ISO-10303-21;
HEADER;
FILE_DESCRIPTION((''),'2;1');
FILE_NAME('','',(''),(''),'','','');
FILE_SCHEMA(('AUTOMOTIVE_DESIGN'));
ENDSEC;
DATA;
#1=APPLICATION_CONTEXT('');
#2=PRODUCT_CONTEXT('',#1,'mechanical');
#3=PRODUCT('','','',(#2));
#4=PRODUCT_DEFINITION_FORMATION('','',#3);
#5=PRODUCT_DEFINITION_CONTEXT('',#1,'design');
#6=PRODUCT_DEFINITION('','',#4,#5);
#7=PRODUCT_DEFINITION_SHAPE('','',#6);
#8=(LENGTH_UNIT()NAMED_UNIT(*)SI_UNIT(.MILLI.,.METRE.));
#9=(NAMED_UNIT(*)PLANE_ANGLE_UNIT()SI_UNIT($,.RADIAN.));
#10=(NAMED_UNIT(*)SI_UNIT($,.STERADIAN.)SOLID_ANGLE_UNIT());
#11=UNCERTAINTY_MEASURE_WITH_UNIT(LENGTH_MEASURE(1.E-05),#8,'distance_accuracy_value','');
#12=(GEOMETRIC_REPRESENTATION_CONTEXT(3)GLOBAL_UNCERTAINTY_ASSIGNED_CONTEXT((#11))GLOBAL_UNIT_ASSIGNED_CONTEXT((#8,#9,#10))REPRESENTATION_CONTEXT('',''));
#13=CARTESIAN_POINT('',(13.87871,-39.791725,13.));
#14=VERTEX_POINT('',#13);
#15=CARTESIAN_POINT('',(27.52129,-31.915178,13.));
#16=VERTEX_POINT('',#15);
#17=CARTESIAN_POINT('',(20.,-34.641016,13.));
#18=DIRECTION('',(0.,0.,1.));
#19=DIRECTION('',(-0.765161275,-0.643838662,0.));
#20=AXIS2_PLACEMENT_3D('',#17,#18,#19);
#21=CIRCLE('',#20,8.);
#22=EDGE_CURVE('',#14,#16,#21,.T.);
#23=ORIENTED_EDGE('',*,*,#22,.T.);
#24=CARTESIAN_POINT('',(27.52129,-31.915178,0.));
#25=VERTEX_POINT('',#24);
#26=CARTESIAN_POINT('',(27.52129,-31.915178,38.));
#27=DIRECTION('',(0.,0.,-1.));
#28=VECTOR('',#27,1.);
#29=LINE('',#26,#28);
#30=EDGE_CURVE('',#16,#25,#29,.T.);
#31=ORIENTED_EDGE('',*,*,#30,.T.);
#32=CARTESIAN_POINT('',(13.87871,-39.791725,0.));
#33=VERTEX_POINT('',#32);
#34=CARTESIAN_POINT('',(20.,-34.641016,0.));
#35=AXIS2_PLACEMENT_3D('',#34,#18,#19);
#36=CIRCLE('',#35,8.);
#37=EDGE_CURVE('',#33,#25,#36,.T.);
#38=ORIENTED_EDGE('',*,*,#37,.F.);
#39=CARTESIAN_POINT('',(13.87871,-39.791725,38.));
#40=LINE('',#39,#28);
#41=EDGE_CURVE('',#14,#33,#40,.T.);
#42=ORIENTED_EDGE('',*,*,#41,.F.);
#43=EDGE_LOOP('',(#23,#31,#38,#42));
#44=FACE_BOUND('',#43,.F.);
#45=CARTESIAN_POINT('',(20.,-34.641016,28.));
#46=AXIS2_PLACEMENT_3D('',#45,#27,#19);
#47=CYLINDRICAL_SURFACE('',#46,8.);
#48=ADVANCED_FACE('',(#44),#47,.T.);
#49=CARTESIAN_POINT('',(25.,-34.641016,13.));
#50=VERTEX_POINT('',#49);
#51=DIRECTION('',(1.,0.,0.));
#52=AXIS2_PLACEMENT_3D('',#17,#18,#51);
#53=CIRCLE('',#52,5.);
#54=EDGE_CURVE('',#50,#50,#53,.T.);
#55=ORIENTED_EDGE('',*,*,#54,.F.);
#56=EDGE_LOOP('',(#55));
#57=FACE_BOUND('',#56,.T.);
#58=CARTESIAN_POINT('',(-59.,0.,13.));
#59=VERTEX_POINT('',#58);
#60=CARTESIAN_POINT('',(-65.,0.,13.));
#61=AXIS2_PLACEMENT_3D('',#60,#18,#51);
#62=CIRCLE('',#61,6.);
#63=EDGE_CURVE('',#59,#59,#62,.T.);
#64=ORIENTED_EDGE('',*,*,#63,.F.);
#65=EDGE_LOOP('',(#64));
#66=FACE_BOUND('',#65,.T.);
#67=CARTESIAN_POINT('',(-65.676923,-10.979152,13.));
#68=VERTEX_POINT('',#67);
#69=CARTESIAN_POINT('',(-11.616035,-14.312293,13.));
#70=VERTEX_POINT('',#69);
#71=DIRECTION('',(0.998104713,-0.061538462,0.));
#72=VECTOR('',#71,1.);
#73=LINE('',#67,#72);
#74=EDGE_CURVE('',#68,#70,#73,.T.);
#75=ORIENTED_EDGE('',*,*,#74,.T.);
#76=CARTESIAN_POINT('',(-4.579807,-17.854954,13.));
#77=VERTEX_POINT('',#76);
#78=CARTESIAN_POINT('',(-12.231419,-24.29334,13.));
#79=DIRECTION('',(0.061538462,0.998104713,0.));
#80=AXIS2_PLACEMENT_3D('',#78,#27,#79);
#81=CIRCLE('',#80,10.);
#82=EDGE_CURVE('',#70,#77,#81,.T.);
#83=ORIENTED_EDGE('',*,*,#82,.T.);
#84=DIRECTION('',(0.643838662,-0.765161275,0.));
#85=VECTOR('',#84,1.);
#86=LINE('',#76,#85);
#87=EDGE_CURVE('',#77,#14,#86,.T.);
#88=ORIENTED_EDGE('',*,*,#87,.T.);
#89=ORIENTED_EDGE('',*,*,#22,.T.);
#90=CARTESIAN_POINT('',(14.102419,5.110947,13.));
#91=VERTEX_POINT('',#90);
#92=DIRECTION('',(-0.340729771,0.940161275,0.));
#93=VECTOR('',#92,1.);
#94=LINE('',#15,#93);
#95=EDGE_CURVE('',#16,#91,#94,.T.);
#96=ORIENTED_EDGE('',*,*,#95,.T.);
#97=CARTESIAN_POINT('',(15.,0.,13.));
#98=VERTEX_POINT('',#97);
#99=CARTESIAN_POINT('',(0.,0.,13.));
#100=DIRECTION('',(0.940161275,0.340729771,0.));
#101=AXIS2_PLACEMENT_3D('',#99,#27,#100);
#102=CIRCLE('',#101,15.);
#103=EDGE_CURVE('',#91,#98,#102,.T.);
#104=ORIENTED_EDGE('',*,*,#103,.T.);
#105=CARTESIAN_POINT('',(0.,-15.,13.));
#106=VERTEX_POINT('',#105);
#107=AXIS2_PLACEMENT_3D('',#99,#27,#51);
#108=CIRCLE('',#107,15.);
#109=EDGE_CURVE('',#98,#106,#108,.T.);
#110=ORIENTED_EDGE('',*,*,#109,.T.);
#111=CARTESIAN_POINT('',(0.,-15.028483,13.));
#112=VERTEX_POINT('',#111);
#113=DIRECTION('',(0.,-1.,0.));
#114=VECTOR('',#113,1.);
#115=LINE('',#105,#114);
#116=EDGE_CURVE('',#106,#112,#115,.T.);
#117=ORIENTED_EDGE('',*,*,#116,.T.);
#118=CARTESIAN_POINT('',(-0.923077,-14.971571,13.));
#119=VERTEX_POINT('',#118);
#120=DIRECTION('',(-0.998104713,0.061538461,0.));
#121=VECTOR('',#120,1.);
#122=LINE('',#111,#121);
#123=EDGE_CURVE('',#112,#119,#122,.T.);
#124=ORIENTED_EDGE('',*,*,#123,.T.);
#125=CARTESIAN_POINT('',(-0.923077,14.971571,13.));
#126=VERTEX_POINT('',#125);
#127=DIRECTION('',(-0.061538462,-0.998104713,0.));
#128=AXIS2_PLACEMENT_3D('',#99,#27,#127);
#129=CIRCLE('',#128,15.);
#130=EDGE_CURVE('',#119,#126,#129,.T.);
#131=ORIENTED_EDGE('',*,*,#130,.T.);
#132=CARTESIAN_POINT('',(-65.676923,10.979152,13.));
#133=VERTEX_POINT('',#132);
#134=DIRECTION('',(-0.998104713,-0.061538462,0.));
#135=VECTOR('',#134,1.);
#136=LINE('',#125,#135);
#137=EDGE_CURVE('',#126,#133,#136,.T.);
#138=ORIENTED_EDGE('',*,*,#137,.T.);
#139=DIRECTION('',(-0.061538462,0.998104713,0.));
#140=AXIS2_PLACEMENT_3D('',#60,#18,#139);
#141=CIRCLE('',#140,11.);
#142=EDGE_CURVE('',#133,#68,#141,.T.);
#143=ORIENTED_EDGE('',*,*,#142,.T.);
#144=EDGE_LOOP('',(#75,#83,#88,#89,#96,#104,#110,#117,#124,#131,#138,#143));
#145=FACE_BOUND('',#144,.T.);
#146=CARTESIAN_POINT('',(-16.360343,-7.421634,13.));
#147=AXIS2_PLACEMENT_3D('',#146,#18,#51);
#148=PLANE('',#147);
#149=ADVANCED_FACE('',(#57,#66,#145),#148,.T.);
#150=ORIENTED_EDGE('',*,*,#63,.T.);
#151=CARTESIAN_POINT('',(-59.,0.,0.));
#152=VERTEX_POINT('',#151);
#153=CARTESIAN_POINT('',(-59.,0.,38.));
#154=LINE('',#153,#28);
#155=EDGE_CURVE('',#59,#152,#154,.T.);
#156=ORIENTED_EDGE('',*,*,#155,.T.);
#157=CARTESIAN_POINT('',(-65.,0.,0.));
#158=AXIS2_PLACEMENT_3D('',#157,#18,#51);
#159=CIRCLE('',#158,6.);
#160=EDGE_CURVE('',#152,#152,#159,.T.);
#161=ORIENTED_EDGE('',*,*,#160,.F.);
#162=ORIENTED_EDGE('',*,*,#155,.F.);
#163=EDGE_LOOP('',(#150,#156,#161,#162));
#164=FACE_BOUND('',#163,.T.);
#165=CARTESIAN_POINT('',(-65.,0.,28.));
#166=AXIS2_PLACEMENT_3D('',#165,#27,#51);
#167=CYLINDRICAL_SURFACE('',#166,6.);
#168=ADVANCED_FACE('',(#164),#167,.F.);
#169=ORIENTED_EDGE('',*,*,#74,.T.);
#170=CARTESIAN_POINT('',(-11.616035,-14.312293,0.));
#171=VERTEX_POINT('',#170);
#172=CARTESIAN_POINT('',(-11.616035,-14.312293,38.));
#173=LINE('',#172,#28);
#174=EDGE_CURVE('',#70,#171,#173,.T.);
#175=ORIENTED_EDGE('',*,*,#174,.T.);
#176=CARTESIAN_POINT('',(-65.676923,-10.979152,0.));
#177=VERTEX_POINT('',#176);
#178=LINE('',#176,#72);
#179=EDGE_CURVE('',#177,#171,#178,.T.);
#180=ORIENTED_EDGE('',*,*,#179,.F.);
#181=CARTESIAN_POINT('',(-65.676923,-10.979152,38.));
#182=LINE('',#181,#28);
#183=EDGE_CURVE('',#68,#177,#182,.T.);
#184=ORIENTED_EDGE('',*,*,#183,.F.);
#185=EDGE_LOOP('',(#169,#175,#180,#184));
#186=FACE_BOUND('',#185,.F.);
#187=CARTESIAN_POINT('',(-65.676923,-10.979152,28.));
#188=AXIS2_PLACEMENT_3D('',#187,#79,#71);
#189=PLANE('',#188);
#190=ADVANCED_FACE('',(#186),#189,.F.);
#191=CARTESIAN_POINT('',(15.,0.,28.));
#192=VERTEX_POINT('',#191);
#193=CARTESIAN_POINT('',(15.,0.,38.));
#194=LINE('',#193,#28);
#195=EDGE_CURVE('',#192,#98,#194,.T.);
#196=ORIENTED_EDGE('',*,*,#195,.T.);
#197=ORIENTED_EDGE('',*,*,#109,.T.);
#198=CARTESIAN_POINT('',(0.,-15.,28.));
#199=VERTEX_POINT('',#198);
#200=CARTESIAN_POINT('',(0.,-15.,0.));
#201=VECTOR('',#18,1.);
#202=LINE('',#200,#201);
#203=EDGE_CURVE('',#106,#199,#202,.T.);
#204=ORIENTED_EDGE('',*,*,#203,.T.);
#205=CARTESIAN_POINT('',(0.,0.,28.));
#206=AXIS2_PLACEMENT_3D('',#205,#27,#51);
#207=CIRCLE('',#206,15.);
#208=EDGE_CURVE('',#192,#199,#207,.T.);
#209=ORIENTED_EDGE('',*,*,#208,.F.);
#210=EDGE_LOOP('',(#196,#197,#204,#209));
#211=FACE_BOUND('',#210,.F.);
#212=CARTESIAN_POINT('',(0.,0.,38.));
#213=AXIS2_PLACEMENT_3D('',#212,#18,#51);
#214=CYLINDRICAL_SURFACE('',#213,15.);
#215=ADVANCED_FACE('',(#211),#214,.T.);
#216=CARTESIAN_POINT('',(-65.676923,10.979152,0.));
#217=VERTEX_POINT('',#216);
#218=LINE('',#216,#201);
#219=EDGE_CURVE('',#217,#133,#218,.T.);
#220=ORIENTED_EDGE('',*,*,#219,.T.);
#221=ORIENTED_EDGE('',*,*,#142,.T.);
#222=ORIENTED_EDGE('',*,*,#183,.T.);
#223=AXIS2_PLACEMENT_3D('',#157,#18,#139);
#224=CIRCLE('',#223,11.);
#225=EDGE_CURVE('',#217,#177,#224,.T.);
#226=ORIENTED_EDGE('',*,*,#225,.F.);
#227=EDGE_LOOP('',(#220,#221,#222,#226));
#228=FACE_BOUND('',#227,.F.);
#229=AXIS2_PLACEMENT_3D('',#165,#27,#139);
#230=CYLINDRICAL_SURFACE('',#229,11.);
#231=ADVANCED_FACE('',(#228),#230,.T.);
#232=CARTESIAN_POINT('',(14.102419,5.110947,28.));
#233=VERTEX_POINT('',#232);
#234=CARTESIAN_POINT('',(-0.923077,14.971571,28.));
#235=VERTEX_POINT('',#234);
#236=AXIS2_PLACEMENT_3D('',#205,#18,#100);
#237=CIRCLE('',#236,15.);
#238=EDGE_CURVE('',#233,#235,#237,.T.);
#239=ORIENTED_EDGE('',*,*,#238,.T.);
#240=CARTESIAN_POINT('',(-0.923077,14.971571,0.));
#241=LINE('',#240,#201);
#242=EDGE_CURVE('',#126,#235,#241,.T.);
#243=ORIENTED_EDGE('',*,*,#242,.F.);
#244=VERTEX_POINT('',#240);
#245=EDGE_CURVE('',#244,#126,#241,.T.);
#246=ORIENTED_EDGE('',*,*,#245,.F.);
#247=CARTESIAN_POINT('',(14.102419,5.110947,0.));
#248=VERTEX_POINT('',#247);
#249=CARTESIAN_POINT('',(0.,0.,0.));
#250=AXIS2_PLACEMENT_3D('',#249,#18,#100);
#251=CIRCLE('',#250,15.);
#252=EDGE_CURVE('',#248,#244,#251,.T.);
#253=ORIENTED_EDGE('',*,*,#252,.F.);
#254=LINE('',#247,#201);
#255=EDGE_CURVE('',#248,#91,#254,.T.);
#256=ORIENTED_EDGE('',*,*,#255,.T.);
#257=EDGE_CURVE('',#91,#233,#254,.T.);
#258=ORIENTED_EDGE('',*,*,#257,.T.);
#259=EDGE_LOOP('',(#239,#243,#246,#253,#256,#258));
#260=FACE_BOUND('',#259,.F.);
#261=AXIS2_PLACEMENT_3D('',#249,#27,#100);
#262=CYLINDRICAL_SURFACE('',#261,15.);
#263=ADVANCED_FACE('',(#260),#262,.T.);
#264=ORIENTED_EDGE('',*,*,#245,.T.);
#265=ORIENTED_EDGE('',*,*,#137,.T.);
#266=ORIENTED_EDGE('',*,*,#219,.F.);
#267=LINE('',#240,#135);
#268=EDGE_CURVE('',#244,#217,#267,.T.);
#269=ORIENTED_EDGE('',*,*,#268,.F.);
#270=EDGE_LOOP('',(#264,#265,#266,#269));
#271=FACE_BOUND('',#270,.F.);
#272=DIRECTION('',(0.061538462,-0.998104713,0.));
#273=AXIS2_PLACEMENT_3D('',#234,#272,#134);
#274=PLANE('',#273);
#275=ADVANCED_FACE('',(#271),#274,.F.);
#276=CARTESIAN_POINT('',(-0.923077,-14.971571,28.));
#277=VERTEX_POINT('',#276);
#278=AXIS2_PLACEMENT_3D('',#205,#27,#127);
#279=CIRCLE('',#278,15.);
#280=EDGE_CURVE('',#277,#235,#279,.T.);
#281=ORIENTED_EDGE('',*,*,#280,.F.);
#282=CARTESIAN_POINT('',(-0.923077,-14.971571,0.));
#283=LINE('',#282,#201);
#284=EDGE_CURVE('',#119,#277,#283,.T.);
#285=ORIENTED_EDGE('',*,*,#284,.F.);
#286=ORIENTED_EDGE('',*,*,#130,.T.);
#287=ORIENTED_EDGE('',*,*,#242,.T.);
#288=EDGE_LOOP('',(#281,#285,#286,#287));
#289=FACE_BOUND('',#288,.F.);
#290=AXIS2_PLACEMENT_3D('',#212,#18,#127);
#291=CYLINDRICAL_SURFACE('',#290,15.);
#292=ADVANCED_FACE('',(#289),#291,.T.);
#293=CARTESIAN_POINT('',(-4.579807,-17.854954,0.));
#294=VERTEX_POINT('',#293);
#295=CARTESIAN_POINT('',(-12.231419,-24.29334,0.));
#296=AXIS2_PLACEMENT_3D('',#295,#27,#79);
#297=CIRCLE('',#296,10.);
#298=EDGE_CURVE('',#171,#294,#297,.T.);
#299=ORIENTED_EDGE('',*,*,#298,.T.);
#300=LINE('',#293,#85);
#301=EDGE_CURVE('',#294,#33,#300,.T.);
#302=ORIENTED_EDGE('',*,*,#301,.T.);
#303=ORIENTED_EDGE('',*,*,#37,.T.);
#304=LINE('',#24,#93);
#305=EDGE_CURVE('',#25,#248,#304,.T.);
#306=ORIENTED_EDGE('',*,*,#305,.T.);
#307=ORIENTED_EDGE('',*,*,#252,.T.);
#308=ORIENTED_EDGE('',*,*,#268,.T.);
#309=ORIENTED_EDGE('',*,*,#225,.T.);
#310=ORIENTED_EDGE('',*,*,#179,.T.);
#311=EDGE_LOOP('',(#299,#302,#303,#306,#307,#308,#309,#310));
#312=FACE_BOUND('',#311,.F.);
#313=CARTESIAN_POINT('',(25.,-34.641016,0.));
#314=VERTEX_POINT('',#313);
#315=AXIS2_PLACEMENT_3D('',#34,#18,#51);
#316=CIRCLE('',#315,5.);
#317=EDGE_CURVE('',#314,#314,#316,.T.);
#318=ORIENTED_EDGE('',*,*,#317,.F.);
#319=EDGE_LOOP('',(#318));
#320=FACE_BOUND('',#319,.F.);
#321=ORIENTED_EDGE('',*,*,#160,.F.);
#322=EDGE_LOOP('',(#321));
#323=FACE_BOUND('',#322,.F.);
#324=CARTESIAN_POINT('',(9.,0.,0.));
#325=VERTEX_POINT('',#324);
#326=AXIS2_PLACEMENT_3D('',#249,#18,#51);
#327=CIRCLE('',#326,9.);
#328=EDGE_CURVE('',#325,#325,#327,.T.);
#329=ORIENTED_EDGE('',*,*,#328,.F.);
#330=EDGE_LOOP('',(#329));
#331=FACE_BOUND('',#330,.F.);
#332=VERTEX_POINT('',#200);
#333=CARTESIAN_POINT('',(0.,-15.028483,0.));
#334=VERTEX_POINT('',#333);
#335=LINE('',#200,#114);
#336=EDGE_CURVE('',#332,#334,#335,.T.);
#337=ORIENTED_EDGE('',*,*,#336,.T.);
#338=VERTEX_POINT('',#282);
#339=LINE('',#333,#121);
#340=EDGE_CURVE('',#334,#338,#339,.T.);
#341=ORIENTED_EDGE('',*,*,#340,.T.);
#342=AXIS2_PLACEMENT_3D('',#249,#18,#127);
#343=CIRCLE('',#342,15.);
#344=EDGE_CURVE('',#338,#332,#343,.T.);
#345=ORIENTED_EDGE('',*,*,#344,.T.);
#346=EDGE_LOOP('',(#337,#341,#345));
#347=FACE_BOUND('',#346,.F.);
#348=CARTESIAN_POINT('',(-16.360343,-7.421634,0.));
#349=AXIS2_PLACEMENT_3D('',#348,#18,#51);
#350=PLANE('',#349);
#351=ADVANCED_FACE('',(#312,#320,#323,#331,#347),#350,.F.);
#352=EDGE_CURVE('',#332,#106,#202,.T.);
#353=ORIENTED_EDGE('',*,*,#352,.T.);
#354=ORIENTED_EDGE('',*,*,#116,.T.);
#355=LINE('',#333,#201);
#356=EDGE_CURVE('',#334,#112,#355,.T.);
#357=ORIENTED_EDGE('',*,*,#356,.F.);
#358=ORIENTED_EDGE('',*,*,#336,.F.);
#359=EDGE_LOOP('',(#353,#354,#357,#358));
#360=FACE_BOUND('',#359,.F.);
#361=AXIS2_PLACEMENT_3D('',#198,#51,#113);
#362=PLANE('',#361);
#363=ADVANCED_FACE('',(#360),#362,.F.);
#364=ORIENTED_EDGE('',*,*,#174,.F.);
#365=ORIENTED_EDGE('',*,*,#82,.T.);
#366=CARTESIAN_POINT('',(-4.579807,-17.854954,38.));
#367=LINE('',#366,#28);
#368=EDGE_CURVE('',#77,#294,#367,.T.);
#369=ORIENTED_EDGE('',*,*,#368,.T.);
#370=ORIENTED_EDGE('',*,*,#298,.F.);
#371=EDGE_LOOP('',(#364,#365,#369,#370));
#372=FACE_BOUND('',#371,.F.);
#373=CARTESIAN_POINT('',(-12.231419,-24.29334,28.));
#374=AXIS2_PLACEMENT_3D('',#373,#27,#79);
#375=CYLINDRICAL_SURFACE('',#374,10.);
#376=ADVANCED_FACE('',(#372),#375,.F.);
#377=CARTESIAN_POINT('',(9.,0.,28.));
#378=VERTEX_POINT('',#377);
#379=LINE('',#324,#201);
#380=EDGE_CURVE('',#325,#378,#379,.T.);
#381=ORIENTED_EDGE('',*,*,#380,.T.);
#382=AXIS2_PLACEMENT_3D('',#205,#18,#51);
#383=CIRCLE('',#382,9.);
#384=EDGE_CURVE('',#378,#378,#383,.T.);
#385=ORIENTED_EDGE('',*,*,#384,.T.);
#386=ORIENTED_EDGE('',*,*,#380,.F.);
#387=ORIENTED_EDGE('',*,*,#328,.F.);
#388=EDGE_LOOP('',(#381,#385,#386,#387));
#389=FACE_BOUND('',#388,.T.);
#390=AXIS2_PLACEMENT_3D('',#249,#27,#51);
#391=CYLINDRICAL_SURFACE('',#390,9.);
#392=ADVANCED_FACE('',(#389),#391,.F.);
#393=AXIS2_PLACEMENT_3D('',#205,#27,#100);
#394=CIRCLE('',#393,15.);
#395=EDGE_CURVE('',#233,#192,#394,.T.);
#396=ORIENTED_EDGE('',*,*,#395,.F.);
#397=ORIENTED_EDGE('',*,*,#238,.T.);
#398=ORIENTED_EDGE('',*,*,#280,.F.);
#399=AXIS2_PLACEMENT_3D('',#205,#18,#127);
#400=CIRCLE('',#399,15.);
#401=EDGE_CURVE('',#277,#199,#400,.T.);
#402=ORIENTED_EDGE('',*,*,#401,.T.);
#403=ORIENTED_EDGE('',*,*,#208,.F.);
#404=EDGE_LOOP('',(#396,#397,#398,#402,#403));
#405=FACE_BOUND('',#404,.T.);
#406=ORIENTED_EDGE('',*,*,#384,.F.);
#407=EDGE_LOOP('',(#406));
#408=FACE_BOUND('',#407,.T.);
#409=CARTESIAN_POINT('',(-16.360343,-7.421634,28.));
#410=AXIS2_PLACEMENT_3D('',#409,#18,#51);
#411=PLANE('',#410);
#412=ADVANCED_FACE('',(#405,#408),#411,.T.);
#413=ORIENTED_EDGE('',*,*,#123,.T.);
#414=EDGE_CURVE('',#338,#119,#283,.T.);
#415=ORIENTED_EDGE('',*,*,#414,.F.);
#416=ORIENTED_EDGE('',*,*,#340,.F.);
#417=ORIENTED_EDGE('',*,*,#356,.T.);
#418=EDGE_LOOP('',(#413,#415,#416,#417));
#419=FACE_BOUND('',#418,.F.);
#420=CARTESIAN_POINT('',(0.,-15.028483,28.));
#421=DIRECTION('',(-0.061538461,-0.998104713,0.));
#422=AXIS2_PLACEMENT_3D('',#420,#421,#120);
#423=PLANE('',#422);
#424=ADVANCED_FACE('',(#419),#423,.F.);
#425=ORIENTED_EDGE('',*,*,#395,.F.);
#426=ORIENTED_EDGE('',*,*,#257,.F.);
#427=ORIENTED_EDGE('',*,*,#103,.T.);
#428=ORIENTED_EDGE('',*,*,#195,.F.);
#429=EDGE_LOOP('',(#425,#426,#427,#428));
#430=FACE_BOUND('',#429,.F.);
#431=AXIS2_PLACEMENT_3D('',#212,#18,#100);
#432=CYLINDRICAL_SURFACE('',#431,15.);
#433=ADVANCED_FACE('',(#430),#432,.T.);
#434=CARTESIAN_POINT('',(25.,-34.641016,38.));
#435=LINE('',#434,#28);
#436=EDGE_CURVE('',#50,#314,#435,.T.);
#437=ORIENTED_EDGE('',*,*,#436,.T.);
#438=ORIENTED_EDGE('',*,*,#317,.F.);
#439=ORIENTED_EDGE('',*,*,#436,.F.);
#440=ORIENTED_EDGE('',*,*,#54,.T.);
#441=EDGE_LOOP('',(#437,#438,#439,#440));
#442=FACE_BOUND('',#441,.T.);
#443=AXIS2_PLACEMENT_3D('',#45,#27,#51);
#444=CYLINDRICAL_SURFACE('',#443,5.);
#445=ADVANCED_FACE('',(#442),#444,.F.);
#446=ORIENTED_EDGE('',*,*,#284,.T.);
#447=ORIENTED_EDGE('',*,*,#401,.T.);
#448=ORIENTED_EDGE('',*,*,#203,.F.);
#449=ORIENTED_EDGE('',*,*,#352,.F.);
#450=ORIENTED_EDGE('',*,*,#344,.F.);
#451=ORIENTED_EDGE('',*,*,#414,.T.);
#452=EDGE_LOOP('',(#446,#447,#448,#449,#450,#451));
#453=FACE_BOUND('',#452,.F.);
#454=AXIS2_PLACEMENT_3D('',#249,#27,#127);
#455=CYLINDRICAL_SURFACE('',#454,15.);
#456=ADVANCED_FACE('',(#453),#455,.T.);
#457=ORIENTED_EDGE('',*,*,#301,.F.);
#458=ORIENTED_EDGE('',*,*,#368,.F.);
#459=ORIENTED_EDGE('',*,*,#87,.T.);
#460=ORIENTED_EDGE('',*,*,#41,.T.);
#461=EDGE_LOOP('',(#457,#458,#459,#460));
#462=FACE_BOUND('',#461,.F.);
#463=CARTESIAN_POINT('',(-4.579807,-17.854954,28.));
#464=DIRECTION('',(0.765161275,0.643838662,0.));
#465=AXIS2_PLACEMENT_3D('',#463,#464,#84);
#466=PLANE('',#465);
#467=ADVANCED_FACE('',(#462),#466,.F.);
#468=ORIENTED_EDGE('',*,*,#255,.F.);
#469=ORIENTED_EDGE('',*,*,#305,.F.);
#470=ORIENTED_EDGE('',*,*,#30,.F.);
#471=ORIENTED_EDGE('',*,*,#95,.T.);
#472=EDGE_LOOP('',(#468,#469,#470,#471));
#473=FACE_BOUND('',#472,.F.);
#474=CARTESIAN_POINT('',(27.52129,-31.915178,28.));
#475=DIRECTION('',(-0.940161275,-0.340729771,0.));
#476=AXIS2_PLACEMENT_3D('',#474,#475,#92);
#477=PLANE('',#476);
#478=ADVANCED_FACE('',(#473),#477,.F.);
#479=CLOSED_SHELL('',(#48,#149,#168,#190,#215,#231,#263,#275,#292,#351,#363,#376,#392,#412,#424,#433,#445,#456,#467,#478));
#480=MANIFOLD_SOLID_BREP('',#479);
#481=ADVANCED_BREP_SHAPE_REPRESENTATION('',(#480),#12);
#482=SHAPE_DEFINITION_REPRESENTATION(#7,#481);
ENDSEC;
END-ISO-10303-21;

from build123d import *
from build123d import SkipClean  # not in build123d's __all__

# Parameters (mm, degrees)
F0_R     = 5
F0_R_2   = 6
F0_R_3   = 9
F1_DEPTH = 28
F2_R     = 5
F2_R_2   = 6
F3_DEPTH = 10
F4_DEPTH = 25


with BuildPart() as f1:
    # F0 (on Top) → F1 (new body)
    with BuildSketch(Plane.XY):
        with BuildLine():
            ThreePointArc((14.102419126, 5.1109465654), (14.7739007525, 2.5945821542), (15, 0))
            ThreePointArc((15, 0), (10.6066017178, -10.6066017178), (0, -15))
            Line((0, -15), (0, -15.0284832917))
            Line((0, -15.0284832917), (-0.9230769231, -14.9715706923))
            ThreePointArc((-0.9230769231, -14.9715706923), (-15, 3.22e-08), (-0.9230768589, 14.9715706962))
            Line((-0.9230768589, 14.9715706962), (-65.6769230769, 10.979151841))
            ThreePointArc((-65.6769230769, 10.979151841), (-76, 0), (-65.6769230769, -10.979151841))
            Line((-65.6769230769, -10.979151841), (-11.6160346835, -14.3122930019))
            ThreePointArc((-11.6160346835, -14.3122930019), (-7.7343733546, -15.3615666346), (-4.5798065483, -17.8549535065))
            Line((-4.5798065483, -17.8549535065), (13.8787097995, -39.7917254502))
            ThreePointArc((13.8787097995, -39.7917254502), (24, -41.5692193817), (27.5212902005, -31.9151779832))
            Line((27.5212902005, -31.9151779832), (14.102419126, 5.1109465654))
        make_face()
        with Locations((20, -34.6410161514)):
            Circle(F0_R, mode=Mode.SUBTRACT)
        with Locations((-65, 0)):
            Circle(F0_R_2, mode=Mode.SUBTRACT)
        with BuildLine():
            ThreePointArc((0, -15), (10.6066017178, -10.6066017178), (15, 0))
            ThreePointArc((15, 0), (14.7739007525, 2.5945821542), (14.102419126, 5.1109465654))
            ThreePointArc((14.102419126, 5.1109465654), (8.2299296905, 12.5406641486), (-0.9230768589, 14.9715706962))
            ThreePointArc((-0.9230768589, 14.9715706962), (-15, 3.22e-08), (-0.9230769231, -14.9715706923))
            ThreePointArc((-0.9230769231, -14.9715706923), (-0.4617573041, -14.9928909885), (0, -15))
        make_face()
        Circle(F0_R_3, mode=Mode.SUBTRACT)
    extrude(amount=F1_DEPTH)

    # F2 (on face) → F3 (join)
    with BuildSketch(Plane.XY.offset(28)):
        with BuildLine():
            ThreePointArc((14.102419126, 5.1109465654), (14.7739007525, 2.5945821542), (15, 0))
            ThreePointArc((15, 0), (10.6066017178, -10.6066017178), (0, -15))
            Line((0, -15), (0, -15.0284832917))
            Line((0, -15.0284832917), (-0.9230769231, -14.9715706923))
            ThreePointArc((-0.9230769231, -14.9715706923), (-15, 3.22e-08), (-0.9230768589, 14.9715706962))
            Line((-0.9230768589, 14.9715706962), (-65.6769230769, 10.979151841))
            ThreePointArc((-65.6769230769, 10.979151841), (-76, 0), (-65.6769230769, -10.979151841))
            Line((-65.6769230769, -10.979151841), (-11.6160346835, -14.3122930019))
            ThreePointArc((-11.6160346835, -14.3122930019), (-7.7343733546, -15.3615666346), (-4.5798065483, -17.8549535065))
            Line((-4.5798065483, -17.8549535065), (13.8787097995, -39.7917254502))
            ThreePointArc((13.8787097995, -39.7917254502), (24, -41.5692193817), (27.5212902005, -31.9151779832))
            Line((27.5212902005, -31.9151779832), (14.102419126, 5.1109465654))
        make_face()
        with Locations((20, -34.6410161514)):
            Circle(F2_R, mode=Mode.SUBTRACT)
        with Locations((-65, 0)):
            Circle(F2_R_2, mode=Mode.SUBTRACT)
    extrude(amount=F3_DEPTH)

    # F4 (cut): a face of the model
    f4_faces = [f1.faces().sort_by_distance(p)[0] for p in [
        (-23.7772133401, -6.7537112781, 38),
    ]]
    with SkipClean():  # cleaning this boolean's faces spoils the solid; the shape is the same uncleaned
        extrude(f4_faces, amount=-F4_DEPTH, mode=Mode.SUBTRACT)


solid = f1.part
